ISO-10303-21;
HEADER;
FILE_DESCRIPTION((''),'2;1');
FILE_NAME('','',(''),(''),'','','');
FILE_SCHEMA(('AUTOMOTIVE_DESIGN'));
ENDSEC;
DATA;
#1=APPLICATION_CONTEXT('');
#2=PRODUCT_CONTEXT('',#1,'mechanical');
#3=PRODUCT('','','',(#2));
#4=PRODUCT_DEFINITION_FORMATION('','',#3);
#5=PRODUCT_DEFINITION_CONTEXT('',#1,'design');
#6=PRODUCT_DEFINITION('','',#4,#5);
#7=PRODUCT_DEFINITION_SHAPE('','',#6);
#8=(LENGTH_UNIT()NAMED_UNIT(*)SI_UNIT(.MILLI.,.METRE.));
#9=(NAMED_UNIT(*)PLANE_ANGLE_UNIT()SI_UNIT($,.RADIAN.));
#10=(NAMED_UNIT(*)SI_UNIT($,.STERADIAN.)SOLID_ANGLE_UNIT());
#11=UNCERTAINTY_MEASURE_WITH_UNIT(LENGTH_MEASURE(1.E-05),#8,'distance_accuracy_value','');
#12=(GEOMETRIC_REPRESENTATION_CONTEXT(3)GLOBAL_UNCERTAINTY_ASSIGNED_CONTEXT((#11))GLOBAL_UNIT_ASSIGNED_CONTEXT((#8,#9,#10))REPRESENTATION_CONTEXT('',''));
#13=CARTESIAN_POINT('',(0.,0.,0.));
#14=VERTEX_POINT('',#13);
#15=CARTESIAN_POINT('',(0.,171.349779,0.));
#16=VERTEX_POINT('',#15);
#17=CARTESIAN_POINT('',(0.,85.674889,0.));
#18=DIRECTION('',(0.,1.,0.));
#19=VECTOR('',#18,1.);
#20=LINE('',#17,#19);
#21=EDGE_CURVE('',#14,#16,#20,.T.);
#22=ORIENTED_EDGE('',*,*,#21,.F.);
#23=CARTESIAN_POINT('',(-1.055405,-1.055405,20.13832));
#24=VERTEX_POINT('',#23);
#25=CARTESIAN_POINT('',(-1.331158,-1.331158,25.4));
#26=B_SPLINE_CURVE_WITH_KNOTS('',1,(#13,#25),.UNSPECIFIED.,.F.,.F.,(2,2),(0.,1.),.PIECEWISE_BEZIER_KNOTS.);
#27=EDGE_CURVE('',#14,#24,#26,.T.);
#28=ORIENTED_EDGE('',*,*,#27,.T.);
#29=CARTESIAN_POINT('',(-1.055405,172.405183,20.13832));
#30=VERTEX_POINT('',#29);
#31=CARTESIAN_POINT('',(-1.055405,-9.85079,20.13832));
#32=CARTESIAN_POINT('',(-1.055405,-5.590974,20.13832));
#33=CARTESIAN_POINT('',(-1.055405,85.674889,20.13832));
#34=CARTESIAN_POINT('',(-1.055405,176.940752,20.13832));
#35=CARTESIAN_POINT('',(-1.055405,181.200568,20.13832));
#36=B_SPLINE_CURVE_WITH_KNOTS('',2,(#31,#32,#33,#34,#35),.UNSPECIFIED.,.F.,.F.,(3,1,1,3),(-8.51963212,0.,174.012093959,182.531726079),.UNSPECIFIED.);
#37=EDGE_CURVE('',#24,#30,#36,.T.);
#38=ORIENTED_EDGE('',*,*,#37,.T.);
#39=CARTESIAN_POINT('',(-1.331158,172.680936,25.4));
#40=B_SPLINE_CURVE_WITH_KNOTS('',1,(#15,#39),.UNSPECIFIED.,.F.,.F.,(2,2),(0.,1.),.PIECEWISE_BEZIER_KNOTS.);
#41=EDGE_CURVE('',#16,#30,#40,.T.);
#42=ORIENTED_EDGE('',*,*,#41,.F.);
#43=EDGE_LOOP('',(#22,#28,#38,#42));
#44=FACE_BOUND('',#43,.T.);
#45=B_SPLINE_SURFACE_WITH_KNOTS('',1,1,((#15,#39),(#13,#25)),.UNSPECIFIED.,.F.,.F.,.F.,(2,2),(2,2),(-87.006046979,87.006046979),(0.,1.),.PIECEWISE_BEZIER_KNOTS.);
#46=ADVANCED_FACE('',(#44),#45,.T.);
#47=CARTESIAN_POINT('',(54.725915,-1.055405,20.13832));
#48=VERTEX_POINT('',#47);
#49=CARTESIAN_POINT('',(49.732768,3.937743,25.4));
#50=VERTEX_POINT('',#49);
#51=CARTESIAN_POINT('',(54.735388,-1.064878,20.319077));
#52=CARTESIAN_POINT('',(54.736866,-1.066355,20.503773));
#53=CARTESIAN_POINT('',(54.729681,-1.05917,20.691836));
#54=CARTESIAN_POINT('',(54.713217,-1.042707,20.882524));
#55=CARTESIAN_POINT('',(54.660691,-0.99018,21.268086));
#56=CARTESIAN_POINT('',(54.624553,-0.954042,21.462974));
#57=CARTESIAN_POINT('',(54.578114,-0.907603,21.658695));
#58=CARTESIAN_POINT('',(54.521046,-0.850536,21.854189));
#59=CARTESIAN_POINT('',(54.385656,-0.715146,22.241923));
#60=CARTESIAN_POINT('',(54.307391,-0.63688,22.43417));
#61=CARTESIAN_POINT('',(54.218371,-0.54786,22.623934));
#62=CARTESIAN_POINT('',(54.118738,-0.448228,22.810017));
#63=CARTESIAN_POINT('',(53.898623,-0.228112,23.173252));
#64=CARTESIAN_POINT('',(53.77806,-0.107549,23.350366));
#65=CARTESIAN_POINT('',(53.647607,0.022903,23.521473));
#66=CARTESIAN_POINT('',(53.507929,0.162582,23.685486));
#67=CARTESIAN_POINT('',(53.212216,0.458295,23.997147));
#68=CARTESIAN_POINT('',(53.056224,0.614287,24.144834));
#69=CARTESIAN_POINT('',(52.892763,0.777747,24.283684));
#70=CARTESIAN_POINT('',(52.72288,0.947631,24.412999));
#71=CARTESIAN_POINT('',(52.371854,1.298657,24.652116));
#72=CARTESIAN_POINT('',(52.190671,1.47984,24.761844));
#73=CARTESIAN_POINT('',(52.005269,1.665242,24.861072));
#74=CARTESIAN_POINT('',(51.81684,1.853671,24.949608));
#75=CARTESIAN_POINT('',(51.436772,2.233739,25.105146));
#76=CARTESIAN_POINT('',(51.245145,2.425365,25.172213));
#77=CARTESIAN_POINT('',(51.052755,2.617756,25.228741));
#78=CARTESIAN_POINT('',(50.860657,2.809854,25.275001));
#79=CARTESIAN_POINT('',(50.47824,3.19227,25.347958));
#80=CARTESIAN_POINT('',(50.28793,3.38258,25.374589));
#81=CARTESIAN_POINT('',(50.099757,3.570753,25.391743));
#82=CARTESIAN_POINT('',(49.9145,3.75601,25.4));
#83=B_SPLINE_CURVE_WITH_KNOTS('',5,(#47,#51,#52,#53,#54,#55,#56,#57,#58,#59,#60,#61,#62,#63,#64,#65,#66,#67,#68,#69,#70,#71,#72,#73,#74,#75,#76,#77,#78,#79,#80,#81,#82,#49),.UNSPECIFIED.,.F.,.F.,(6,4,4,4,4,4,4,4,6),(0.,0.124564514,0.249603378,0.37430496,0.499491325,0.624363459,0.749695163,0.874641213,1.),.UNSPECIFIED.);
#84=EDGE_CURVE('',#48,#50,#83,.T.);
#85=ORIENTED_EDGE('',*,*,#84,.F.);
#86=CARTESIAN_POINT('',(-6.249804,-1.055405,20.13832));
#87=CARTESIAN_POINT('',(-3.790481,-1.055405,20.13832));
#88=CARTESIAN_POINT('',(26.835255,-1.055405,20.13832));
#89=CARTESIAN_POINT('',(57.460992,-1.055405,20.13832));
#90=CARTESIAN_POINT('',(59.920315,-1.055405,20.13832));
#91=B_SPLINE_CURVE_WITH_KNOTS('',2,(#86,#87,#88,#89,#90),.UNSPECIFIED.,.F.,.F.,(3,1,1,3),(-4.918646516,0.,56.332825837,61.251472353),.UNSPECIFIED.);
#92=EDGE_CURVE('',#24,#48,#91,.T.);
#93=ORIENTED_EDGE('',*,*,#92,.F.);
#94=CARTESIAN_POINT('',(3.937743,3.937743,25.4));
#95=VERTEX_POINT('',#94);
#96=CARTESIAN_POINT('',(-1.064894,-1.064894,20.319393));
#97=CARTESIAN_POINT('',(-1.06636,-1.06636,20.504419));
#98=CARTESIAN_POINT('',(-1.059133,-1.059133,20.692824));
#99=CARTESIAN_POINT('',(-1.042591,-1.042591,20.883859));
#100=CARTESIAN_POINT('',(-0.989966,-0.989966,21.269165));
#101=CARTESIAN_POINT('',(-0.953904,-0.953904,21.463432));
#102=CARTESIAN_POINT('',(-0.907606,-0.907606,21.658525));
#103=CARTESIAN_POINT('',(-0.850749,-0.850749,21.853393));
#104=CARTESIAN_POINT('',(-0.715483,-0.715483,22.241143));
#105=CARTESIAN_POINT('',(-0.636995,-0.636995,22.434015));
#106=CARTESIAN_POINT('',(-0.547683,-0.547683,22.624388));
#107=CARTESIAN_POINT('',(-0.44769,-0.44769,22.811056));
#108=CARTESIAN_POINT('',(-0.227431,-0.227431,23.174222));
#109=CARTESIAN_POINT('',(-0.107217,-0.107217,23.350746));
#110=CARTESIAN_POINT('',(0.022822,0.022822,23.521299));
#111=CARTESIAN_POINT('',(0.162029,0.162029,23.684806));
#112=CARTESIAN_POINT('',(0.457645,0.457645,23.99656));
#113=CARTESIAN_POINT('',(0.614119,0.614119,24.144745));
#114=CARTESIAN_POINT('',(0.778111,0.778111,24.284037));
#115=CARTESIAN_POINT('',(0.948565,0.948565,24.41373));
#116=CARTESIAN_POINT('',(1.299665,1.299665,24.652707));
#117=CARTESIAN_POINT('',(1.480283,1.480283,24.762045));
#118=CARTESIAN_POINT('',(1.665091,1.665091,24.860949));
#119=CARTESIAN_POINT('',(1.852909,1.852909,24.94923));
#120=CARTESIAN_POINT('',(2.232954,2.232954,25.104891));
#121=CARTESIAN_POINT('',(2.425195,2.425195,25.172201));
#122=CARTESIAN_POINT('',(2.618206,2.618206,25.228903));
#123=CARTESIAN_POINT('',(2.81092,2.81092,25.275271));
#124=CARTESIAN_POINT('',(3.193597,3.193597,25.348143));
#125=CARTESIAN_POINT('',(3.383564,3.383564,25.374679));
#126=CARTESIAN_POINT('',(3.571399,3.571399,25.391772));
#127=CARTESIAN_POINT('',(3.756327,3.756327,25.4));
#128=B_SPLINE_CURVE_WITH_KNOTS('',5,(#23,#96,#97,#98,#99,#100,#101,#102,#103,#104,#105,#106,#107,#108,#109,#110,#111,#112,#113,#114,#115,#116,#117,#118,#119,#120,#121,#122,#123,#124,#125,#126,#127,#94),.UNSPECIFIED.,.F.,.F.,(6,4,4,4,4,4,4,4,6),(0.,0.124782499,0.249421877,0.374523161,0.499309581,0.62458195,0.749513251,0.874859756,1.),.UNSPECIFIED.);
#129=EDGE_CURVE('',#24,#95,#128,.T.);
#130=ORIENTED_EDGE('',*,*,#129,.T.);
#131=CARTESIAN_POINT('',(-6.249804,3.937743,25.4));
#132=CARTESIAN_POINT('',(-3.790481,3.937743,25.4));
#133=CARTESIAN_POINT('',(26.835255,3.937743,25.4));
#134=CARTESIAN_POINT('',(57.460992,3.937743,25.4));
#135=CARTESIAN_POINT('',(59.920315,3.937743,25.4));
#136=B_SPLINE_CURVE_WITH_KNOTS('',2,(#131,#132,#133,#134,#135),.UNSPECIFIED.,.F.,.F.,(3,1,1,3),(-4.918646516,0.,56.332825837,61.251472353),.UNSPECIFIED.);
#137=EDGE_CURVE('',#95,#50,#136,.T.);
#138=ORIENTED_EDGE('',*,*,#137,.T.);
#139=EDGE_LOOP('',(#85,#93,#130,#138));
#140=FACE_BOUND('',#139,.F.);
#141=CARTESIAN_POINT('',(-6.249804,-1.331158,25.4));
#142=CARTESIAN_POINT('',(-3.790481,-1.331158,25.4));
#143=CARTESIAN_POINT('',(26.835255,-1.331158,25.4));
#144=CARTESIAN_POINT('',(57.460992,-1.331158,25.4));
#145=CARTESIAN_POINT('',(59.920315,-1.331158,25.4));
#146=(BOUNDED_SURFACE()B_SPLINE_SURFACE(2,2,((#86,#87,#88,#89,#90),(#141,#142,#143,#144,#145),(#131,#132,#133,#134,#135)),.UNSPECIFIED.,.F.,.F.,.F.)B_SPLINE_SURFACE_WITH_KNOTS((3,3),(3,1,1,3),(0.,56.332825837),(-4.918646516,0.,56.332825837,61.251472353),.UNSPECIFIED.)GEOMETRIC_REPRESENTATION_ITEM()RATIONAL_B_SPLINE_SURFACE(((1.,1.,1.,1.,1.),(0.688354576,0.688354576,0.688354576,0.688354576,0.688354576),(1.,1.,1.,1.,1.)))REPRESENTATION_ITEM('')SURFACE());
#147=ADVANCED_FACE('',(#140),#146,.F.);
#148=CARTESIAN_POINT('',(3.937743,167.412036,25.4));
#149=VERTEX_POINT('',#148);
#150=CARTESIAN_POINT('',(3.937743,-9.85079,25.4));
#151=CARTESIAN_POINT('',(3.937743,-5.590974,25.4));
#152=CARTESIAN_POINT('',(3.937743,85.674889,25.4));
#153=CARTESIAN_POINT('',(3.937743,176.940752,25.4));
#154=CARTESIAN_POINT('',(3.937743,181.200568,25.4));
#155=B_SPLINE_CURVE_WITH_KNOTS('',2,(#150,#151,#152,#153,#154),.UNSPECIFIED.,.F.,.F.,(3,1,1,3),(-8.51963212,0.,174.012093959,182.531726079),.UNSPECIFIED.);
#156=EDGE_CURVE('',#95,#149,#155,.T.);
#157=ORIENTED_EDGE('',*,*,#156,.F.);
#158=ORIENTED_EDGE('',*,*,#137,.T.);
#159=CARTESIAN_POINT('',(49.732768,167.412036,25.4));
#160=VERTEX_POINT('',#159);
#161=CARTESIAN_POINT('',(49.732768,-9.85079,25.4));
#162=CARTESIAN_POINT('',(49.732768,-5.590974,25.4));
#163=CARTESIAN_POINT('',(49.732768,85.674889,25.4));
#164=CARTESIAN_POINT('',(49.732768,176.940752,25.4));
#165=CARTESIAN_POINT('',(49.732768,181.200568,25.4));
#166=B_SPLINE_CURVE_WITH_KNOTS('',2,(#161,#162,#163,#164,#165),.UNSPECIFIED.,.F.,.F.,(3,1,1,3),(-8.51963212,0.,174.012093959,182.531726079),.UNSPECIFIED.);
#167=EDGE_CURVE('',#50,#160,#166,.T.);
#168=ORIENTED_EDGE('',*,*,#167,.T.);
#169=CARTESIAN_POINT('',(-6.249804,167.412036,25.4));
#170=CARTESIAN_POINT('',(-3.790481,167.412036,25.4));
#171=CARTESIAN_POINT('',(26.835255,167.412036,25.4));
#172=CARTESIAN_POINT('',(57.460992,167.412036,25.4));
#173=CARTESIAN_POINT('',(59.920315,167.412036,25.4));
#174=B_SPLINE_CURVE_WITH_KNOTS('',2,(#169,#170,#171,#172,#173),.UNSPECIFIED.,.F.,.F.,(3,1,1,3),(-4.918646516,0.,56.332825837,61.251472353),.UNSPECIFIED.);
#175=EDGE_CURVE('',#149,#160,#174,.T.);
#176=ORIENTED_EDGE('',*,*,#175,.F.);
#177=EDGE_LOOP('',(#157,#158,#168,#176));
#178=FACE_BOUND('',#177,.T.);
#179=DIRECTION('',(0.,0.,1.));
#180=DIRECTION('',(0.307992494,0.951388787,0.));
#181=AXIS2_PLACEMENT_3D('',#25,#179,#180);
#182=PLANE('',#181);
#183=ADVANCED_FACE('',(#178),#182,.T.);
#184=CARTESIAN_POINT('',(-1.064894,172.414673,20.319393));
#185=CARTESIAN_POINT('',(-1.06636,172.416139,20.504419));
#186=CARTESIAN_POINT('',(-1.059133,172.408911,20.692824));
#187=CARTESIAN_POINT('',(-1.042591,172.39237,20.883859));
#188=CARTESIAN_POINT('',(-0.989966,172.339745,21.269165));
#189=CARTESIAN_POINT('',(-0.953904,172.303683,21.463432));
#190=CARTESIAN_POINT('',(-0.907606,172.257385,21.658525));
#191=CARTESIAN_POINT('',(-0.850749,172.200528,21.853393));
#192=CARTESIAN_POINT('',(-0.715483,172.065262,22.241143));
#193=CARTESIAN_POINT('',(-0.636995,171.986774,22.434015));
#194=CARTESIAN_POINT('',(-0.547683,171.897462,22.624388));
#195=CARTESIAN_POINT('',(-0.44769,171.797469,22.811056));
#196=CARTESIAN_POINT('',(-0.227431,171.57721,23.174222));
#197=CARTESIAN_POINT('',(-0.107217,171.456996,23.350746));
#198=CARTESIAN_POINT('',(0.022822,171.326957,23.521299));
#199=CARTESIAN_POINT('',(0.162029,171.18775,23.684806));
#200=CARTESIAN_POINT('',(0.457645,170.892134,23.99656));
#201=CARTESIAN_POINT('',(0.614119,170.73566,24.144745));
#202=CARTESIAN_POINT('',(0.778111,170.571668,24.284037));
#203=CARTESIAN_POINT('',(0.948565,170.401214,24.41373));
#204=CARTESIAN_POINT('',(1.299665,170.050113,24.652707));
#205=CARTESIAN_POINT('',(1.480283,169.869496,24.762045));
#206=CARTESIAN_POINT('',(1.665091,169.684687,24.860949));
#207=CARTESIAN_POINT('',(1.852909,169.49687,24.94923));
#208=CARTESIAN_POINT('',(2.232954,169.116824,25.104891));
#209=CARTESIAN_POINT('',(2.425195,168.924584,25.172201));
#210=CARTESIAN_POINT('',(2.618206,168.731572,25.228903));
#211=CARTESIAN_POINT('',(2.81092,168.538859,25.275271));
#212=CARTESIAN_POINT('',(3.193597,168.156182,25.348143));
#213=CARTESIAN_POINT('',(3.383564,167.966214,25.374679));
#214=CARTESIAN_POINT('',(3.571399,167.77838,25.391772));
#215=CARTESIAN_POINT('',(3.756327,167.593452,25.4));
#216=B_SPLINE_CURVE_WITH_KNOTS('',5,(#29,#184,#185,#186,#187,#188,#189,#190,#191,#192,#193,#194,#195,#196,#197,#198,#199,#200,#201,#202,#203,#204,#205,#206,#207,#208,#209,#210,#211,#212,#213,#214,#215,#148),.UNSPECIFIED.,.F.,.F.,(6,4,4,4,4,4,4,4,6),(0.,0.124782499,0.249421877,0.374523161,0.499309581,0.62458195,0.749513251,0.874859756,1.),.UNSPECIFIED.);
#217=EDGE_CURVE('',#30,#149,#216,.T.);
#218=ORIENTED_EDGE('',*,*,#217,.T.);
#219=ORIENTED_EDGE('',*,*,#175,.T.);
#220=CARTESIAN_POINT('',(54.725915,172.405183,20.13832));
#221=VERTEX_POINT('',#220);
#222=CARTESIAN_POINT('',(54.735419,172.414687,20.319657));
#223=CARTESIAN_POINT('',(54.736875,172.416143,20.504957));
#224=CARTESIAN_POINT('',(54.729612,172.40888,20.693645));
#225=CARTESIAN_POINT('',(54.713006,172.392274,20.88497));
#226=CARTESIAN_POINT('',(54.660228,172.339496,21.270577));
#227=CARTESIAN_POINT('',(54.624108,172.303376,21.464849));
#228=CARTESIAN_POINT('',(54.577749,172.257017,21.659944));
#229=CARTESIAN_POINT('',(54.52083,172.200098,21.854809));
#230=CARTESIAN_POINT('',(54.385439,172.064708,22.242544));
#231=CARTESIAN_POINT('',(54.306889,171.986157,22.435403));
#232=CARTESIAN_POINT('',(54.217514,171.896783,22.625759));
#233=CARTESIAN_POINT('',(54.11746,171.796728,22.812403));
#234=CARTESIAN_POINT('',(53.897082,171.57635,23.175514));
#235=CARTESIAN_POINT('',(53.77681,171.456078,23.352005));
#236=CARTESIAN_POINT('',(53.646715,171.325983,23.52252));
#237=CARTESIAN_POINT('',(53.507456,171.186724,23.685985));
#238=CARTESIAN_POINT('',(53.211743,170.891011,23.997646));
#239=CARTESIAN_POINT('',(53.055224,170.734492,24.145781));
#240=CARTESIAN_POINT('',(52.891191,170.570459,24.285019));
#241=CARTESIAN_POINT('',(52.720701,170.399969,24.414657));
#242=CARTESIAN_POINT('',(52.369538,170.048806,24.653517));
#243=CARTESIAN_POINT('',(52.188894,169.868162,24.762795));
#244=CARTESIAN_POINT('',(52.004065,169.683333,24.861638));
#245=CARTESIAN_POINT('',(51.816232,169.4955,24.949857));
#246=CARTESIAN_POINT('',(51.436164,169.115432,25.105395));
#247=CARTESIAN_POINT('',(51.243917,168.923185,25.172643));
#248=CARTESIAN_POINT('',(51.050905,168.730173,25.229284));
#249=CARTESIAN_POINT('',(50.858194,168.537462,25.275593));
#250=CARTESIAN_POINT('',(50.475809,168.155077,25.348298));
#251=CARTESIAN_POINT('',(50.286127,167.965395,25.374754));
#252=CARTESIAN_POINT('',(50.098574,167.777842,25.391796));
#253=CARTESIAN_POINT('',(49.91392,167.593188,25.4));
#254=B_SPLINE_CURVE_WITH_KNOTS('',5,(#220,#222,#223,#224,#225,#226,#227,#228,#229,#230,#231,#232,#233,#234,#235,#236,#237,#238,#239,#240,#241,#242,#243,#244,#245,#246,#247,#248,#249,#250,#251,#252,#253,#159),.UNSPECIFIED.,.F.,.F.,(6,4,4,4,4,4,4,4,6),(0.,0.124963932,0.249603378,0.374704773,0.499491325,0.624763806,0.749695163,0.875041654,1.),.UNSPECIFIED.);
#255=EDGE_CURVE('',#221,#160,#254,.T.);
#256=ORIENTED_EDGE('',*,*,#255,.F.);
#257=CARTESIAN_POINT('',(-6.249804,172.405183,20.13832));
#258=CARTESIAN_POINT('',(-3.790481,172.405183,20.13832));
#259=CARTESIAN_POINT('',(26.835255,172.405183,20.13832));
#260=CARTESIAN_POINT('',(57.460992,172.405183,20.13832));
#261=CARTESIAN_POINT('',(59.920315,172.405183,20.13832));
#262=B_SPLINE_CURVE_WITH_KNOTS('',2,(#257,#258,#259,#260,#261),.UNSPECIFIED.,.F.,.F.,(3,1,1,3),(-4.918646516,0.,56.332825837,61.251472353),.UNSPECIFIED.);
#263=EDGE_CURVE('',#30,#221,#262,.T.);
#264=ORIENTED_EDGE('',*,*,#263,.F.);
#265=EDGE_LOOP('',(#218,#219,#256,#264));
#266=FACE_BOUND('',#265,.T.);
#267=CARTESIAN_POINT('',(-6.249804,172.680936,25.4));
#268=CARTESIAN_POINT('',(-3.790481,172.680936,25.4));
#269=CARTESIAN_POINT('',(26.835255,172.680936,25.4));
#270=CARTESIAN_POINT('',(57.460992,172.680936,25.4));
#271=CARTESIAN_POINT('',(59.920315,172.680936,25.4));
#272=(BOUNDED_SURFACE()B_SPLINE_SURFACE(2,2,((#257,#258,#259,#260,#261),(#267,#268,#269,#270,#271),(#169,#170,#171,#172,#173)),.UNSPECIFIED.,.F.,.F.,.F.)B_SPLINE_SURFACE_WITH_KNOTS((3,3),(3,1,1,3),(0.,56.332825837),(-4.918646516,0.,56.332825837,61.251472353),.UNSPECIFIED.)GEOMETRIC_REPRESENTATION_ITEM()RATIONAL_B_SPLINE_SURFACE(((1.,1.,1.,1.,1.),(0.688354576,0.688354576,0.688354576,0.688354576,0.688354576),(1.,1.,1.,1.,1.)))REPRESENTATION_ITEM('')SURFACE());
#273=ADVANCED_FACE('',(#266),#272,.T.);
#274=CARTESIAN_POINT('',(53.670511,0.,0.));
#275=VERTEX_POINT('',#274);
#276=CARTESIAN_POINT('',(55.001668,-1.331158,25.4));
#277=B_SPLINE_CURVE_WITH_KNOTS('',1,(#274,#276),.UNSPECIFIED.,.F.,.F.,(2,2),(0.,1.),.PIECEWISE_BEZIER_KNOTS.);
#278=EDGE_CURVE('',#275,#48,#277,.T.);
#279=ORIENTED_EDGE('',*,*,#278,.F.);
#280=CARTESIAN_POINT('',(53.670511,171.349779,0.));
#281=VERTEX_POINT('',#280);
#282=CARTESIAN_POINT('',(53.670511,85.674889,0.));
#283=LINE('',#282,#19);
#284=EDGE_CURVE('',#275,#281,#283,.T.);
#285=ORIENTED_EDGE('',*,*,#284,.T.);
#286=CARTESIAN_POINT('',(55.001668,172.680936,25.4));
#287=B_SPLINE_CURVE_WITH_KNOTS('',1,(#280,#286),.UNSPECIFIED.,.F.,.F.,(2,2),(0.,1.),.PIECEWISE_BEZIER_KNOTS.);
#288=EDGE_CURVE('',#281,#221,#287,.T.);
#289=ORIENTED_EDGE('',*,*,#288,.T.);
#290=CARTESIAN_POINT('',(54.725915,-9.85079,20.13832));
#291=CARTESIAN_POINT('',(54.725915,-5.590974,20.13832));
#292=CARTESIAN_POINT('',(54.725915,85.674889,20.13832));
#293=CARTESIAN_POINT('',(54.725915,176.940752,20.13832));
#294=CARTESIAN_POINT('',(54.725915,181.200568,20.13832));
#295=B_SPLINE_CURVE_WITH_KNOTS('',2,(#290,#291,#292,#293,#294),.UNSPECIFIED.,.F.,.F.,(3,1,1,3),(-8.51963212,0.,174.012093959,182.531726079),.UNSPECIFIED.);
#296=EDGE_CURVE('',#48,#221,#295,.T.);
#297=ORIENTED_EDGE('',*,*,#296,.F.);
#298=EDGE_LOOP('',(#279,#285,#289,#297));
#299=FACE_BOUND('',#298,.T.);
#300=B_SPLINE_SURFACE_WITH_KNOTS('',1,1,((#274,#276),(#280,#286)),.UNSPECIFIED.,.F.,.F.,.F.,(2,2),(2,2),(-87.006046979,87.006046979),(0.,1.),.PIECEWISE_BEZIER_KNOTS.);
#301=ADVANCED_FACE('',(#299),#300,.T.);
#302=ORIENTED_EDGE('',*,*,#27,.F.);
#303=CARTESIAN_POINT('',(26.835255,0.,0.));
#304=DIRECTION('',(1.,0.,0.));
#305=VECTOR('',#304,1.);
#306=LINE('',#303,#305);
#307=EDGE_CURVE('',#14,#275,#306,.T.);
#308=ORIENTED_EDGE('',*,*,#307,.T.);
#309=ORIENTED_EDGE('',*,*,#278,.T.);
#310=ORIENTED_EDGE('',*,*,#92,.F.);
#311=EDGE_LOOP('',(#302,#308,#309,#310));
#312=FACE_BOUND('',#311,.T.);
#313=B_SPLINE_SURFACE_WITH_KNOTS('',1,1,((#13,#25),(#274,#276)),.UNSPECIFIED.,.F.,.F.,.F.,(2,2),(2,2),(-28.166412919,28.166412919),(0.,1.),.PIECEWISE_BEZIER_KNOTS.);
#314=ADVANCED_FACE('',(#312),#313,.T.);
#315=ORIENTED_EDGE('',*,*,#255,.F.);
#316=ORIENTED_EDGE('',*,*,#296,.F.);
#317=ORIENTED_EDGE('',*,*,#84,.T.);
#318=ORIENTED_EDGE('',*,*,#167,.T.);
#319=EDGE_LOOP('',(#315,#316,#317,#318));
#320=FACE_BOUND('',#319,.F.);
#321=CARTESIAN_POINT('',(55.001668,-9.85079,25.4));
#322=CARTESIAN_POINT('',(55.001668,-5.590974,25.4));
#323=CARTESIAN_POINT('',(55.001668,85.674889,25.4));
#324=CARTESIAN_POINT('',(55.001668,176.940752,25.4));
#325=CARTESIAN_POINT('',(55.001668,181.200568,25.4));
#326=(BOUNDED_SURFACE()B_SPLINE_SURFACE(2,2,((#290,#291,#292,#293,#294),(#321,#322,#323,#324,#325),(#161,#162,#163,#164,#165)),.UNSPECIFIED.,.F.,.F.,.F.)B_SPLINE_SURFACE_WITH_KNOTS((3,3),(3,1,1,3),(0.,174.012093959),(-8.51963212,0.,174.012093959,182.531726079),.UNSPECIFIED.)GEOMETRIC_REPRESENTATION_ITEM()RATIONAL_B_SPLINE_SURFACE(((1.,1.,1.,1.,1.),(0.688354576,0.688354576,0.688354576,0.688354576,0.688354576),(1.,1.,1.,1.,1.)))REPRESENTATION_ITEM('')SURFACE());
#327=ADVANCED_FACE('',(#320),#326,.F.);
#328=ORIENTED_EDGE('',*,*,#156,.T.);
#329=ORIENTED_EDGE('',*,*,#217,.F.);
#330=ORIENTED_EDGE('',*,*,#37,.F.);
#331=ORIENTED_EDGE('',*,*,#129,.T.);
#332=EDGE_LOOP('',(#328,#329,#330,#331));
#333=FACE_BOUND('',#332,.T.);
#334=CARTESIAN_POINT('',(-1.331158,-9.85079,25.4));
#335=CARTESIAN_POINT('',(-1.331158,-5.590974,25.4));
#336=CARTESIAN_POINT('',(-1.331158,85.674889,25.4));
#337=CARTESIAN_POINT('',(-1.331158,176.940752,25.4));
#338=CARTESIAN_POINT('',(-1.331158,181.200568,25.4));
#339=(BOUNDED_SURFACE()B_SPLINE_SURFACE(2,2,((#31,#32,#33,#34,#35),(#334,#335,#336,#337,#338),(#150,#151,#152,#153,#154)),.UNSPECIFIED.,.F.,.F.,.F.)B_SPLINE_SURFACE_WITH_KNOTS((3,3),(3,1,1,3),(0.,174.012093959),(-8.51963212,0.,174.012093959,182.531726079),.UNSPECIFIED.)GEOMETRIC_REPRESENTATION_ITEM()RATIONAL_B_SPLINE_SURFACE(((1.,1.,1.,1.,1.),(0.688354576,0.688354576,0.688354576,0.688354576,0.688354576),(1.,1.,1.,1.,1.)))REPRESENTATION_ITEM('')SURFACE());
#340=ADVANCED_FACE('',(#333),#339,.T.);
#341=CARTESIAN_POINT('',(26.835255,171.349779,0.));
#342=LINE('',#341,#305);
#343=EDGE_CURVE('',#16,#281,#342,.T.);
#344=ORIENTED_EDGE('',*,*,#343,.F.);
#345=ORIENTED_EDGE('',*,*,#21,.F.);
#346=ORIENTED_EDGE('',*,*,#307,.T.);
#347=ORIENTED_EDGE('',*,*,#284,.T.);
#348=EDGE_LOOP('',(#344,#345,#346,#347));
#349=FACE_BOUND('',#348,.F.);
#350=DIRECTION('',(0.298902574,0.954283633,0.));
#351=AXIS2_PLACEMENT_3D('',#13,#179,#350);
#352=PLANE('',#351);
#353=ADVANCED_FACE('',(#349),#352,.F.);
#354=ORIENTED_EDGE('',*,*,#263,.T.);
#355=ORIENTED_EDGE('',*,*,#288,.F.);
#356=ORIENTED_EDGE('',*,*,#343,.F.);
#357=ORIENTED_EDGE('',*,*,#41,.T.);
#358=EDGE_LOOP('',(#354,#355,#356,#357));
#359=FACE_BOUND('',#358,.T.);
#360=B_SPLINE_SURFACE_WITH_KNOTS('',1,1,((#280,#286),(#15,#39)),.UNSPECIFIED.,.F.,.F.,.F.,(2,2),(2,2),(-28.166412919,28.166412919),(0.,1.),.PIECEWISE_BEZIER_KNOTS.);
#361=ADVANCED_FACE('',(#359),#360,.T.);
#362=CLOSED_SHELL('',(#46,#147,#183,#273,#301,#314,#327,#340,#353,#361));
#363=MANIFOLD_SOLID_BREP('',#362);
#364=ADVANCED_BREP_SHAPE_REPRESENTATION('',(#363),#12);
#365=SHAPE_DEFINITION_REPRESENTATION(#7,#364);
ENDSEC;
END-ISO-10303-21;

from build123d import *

# Parameters (mm, degrees)
F0_W     = 53.6705106497
F0_H     = 171.3497787714
F3_DEPTH = 25.4
F3_TAPER = -3
F5_R     = 5


# Not quite as in the source:
# - the program builds the solid bodies; features that only make, move or delete a surface that nothing else refers to are left out


with BuildPart() as f3:
    # F0 (on Top) → F3 (new body)
    with BuildSketch(Plane.XY):
        with Locations((26.8352553248, 85.6748893857)):
            Rectangle(F0_W, F0_H)
    extrude(amount=F3_DEPTH, taper=F3_TAPER)

    # F5
    f5_edges = [f3.edges().sort_by_distance(p)[0] for p in [
        (-1.331158, 85.674889, 25.4),
        (26.835255, -1.331158, 25.4),
        (55.001668, 85.674889, 25.4),
        (26.835255, 172.680936, 25.4),
    ]]
    fillet(f5_edges, radius=F5_R)


solid = f3.part
